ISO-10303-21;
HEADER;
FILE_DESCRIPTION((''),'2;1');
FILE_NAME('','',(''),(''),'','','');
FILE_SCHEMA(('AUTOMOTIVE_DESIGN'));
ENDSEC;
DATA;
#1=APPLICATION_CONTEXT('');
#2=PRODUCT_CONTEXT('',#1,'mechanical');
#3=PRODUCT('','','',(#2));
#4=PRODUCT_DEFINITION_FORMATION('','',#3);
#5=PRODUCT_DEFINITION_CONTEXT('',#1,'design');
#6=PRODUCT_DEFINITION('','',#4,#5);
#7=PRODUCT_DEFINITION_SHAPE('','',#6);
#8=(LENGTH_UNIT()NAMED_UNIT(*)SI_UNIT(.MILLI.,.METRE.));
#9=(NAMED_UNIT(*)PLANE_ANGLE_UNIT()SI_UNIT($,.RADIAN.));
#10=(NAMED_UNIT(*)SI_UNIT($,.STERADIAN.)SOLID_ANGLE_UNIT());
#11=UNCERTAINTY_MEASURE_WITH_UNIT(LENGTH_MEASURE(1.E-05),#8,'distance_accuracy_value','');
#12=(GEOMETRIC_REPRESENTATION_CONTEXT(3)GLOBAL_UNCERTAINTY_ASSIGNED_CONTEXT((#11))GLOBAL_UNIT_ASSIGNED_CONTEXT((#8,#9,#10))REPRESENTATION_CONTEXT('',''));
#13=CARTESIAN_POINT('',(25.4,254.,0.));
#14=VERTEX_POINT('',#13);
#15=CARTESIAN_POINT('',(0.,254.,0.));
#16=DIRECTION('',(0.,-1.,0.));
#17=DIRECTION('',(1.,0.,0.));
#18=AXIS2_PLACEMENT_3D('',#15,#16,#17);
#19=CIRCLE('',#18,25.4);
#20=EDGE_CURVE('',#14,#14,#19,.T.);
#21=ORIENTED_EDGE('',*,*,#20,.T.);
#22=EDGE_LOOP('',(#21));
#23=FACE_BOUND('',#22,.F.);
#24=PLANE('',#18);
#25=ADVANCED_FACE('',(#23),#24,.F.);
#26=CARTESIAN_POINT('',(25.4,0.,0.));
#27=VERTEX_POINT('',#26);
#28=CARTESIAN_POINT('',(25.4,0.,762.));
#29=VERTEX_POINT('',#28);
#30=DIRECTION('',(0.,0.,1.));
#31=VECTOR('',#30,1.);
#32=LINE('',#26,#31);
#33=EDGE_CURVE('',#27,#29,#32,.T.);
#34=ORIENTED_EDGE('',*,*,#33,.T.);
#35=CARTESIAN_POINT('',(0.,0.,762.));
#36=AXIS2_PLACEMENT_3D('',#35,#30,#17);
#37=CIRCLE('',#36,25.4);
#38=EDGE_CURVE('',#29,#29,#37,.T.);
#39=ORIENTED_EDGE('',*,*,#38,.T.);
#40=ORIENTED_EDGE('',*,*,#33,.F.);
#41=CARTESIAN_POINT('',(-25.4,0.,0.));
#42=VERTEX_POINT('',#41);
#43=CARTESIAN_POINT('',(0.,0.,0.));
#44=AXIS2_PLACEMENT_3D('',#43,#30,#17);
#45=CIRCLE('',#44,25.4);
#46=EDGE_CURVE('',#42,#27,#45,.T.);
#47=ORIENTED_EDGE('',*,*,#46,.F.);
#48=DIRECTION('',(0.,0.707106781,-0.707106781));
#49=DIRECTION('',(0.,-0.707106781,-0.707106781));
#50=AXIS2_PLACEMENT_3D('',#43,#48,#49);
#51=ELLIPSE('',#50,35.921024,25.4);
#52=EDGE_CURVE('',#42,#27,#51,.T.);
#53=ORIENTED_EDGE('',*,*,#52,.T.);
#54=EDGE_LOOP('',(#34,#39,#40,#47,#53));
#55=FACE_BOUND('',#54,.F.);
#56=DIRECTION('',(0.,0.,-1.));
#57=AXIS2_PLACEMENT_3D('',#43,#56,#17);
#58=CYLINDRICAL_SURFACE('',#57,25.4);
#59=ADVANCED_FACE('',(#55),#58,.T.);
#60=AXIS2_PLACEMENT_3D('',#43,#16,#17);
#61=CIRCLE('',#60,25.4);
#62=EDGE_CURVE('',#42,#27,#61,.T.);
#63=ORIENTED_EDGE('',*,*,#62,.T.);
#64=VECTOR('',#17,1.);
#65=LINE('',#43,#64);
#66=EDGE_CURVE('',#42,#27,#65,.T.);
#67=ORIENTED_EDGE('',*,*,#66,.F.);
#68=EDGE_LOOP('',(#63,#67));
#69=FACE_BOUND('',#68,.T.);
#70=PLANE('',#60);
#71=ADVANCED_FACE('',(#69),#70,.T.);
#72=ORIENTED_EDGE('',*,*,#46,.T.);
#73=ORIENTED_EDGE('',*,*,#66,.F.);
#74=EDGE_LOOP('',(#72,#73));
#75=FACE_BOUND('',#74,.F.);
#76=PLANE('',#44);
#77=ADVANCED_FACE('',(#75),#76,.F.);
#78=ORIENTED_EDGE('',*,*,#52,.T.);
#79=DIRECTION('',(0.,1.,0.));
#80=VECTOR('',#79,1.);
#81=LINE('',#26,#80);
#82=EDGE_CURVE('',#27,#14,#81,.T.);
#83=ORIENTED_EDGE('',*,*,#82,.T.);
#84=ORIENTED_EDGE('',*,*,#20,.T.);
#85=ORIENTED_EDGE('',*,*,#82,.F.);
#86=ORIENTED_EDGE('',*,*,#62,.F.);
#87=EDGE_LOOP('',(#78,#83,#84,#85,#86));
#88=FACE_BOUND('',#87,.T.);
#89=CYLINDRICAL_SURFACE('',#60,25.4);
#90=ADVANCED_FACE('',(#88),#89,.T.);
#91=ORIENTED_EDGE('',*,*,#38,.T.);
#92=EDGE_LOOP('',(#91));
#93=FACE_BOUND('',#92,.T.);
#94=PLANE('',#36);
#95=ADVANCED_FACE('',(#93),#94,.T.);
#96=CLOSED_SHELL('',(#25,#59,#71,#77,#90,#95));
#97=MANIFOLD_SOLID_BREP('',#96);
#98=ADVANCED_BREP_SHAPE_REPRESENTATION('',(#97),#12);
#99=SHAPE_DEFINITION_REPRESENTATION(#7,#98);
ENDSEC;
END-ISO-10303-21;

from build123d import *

# Parameters (mm, degrees)
F0_R     = 25.4
F1_DEPTH = 762
F4_R     = 25.4
F5_DEPTH = 254


# Not quite as in the source:
# - the program builds the solid bodies; features that only make, move or delete a surface that nothing else refers to are left out


with BuildPart() as f1:
    # F0 (on Top) → F1 (new body)
    with BuildSketch(Plane.XY):
        Circle(F0_R)
    extrude(amount=F1_DEPTH)

    # F4 (on Front) → F5 (join)
    with BuildSketch(Plane.XZ):
        Circle(F4_R)
    extrude(amount=-F5_DEPTH)


solid = f1.part
